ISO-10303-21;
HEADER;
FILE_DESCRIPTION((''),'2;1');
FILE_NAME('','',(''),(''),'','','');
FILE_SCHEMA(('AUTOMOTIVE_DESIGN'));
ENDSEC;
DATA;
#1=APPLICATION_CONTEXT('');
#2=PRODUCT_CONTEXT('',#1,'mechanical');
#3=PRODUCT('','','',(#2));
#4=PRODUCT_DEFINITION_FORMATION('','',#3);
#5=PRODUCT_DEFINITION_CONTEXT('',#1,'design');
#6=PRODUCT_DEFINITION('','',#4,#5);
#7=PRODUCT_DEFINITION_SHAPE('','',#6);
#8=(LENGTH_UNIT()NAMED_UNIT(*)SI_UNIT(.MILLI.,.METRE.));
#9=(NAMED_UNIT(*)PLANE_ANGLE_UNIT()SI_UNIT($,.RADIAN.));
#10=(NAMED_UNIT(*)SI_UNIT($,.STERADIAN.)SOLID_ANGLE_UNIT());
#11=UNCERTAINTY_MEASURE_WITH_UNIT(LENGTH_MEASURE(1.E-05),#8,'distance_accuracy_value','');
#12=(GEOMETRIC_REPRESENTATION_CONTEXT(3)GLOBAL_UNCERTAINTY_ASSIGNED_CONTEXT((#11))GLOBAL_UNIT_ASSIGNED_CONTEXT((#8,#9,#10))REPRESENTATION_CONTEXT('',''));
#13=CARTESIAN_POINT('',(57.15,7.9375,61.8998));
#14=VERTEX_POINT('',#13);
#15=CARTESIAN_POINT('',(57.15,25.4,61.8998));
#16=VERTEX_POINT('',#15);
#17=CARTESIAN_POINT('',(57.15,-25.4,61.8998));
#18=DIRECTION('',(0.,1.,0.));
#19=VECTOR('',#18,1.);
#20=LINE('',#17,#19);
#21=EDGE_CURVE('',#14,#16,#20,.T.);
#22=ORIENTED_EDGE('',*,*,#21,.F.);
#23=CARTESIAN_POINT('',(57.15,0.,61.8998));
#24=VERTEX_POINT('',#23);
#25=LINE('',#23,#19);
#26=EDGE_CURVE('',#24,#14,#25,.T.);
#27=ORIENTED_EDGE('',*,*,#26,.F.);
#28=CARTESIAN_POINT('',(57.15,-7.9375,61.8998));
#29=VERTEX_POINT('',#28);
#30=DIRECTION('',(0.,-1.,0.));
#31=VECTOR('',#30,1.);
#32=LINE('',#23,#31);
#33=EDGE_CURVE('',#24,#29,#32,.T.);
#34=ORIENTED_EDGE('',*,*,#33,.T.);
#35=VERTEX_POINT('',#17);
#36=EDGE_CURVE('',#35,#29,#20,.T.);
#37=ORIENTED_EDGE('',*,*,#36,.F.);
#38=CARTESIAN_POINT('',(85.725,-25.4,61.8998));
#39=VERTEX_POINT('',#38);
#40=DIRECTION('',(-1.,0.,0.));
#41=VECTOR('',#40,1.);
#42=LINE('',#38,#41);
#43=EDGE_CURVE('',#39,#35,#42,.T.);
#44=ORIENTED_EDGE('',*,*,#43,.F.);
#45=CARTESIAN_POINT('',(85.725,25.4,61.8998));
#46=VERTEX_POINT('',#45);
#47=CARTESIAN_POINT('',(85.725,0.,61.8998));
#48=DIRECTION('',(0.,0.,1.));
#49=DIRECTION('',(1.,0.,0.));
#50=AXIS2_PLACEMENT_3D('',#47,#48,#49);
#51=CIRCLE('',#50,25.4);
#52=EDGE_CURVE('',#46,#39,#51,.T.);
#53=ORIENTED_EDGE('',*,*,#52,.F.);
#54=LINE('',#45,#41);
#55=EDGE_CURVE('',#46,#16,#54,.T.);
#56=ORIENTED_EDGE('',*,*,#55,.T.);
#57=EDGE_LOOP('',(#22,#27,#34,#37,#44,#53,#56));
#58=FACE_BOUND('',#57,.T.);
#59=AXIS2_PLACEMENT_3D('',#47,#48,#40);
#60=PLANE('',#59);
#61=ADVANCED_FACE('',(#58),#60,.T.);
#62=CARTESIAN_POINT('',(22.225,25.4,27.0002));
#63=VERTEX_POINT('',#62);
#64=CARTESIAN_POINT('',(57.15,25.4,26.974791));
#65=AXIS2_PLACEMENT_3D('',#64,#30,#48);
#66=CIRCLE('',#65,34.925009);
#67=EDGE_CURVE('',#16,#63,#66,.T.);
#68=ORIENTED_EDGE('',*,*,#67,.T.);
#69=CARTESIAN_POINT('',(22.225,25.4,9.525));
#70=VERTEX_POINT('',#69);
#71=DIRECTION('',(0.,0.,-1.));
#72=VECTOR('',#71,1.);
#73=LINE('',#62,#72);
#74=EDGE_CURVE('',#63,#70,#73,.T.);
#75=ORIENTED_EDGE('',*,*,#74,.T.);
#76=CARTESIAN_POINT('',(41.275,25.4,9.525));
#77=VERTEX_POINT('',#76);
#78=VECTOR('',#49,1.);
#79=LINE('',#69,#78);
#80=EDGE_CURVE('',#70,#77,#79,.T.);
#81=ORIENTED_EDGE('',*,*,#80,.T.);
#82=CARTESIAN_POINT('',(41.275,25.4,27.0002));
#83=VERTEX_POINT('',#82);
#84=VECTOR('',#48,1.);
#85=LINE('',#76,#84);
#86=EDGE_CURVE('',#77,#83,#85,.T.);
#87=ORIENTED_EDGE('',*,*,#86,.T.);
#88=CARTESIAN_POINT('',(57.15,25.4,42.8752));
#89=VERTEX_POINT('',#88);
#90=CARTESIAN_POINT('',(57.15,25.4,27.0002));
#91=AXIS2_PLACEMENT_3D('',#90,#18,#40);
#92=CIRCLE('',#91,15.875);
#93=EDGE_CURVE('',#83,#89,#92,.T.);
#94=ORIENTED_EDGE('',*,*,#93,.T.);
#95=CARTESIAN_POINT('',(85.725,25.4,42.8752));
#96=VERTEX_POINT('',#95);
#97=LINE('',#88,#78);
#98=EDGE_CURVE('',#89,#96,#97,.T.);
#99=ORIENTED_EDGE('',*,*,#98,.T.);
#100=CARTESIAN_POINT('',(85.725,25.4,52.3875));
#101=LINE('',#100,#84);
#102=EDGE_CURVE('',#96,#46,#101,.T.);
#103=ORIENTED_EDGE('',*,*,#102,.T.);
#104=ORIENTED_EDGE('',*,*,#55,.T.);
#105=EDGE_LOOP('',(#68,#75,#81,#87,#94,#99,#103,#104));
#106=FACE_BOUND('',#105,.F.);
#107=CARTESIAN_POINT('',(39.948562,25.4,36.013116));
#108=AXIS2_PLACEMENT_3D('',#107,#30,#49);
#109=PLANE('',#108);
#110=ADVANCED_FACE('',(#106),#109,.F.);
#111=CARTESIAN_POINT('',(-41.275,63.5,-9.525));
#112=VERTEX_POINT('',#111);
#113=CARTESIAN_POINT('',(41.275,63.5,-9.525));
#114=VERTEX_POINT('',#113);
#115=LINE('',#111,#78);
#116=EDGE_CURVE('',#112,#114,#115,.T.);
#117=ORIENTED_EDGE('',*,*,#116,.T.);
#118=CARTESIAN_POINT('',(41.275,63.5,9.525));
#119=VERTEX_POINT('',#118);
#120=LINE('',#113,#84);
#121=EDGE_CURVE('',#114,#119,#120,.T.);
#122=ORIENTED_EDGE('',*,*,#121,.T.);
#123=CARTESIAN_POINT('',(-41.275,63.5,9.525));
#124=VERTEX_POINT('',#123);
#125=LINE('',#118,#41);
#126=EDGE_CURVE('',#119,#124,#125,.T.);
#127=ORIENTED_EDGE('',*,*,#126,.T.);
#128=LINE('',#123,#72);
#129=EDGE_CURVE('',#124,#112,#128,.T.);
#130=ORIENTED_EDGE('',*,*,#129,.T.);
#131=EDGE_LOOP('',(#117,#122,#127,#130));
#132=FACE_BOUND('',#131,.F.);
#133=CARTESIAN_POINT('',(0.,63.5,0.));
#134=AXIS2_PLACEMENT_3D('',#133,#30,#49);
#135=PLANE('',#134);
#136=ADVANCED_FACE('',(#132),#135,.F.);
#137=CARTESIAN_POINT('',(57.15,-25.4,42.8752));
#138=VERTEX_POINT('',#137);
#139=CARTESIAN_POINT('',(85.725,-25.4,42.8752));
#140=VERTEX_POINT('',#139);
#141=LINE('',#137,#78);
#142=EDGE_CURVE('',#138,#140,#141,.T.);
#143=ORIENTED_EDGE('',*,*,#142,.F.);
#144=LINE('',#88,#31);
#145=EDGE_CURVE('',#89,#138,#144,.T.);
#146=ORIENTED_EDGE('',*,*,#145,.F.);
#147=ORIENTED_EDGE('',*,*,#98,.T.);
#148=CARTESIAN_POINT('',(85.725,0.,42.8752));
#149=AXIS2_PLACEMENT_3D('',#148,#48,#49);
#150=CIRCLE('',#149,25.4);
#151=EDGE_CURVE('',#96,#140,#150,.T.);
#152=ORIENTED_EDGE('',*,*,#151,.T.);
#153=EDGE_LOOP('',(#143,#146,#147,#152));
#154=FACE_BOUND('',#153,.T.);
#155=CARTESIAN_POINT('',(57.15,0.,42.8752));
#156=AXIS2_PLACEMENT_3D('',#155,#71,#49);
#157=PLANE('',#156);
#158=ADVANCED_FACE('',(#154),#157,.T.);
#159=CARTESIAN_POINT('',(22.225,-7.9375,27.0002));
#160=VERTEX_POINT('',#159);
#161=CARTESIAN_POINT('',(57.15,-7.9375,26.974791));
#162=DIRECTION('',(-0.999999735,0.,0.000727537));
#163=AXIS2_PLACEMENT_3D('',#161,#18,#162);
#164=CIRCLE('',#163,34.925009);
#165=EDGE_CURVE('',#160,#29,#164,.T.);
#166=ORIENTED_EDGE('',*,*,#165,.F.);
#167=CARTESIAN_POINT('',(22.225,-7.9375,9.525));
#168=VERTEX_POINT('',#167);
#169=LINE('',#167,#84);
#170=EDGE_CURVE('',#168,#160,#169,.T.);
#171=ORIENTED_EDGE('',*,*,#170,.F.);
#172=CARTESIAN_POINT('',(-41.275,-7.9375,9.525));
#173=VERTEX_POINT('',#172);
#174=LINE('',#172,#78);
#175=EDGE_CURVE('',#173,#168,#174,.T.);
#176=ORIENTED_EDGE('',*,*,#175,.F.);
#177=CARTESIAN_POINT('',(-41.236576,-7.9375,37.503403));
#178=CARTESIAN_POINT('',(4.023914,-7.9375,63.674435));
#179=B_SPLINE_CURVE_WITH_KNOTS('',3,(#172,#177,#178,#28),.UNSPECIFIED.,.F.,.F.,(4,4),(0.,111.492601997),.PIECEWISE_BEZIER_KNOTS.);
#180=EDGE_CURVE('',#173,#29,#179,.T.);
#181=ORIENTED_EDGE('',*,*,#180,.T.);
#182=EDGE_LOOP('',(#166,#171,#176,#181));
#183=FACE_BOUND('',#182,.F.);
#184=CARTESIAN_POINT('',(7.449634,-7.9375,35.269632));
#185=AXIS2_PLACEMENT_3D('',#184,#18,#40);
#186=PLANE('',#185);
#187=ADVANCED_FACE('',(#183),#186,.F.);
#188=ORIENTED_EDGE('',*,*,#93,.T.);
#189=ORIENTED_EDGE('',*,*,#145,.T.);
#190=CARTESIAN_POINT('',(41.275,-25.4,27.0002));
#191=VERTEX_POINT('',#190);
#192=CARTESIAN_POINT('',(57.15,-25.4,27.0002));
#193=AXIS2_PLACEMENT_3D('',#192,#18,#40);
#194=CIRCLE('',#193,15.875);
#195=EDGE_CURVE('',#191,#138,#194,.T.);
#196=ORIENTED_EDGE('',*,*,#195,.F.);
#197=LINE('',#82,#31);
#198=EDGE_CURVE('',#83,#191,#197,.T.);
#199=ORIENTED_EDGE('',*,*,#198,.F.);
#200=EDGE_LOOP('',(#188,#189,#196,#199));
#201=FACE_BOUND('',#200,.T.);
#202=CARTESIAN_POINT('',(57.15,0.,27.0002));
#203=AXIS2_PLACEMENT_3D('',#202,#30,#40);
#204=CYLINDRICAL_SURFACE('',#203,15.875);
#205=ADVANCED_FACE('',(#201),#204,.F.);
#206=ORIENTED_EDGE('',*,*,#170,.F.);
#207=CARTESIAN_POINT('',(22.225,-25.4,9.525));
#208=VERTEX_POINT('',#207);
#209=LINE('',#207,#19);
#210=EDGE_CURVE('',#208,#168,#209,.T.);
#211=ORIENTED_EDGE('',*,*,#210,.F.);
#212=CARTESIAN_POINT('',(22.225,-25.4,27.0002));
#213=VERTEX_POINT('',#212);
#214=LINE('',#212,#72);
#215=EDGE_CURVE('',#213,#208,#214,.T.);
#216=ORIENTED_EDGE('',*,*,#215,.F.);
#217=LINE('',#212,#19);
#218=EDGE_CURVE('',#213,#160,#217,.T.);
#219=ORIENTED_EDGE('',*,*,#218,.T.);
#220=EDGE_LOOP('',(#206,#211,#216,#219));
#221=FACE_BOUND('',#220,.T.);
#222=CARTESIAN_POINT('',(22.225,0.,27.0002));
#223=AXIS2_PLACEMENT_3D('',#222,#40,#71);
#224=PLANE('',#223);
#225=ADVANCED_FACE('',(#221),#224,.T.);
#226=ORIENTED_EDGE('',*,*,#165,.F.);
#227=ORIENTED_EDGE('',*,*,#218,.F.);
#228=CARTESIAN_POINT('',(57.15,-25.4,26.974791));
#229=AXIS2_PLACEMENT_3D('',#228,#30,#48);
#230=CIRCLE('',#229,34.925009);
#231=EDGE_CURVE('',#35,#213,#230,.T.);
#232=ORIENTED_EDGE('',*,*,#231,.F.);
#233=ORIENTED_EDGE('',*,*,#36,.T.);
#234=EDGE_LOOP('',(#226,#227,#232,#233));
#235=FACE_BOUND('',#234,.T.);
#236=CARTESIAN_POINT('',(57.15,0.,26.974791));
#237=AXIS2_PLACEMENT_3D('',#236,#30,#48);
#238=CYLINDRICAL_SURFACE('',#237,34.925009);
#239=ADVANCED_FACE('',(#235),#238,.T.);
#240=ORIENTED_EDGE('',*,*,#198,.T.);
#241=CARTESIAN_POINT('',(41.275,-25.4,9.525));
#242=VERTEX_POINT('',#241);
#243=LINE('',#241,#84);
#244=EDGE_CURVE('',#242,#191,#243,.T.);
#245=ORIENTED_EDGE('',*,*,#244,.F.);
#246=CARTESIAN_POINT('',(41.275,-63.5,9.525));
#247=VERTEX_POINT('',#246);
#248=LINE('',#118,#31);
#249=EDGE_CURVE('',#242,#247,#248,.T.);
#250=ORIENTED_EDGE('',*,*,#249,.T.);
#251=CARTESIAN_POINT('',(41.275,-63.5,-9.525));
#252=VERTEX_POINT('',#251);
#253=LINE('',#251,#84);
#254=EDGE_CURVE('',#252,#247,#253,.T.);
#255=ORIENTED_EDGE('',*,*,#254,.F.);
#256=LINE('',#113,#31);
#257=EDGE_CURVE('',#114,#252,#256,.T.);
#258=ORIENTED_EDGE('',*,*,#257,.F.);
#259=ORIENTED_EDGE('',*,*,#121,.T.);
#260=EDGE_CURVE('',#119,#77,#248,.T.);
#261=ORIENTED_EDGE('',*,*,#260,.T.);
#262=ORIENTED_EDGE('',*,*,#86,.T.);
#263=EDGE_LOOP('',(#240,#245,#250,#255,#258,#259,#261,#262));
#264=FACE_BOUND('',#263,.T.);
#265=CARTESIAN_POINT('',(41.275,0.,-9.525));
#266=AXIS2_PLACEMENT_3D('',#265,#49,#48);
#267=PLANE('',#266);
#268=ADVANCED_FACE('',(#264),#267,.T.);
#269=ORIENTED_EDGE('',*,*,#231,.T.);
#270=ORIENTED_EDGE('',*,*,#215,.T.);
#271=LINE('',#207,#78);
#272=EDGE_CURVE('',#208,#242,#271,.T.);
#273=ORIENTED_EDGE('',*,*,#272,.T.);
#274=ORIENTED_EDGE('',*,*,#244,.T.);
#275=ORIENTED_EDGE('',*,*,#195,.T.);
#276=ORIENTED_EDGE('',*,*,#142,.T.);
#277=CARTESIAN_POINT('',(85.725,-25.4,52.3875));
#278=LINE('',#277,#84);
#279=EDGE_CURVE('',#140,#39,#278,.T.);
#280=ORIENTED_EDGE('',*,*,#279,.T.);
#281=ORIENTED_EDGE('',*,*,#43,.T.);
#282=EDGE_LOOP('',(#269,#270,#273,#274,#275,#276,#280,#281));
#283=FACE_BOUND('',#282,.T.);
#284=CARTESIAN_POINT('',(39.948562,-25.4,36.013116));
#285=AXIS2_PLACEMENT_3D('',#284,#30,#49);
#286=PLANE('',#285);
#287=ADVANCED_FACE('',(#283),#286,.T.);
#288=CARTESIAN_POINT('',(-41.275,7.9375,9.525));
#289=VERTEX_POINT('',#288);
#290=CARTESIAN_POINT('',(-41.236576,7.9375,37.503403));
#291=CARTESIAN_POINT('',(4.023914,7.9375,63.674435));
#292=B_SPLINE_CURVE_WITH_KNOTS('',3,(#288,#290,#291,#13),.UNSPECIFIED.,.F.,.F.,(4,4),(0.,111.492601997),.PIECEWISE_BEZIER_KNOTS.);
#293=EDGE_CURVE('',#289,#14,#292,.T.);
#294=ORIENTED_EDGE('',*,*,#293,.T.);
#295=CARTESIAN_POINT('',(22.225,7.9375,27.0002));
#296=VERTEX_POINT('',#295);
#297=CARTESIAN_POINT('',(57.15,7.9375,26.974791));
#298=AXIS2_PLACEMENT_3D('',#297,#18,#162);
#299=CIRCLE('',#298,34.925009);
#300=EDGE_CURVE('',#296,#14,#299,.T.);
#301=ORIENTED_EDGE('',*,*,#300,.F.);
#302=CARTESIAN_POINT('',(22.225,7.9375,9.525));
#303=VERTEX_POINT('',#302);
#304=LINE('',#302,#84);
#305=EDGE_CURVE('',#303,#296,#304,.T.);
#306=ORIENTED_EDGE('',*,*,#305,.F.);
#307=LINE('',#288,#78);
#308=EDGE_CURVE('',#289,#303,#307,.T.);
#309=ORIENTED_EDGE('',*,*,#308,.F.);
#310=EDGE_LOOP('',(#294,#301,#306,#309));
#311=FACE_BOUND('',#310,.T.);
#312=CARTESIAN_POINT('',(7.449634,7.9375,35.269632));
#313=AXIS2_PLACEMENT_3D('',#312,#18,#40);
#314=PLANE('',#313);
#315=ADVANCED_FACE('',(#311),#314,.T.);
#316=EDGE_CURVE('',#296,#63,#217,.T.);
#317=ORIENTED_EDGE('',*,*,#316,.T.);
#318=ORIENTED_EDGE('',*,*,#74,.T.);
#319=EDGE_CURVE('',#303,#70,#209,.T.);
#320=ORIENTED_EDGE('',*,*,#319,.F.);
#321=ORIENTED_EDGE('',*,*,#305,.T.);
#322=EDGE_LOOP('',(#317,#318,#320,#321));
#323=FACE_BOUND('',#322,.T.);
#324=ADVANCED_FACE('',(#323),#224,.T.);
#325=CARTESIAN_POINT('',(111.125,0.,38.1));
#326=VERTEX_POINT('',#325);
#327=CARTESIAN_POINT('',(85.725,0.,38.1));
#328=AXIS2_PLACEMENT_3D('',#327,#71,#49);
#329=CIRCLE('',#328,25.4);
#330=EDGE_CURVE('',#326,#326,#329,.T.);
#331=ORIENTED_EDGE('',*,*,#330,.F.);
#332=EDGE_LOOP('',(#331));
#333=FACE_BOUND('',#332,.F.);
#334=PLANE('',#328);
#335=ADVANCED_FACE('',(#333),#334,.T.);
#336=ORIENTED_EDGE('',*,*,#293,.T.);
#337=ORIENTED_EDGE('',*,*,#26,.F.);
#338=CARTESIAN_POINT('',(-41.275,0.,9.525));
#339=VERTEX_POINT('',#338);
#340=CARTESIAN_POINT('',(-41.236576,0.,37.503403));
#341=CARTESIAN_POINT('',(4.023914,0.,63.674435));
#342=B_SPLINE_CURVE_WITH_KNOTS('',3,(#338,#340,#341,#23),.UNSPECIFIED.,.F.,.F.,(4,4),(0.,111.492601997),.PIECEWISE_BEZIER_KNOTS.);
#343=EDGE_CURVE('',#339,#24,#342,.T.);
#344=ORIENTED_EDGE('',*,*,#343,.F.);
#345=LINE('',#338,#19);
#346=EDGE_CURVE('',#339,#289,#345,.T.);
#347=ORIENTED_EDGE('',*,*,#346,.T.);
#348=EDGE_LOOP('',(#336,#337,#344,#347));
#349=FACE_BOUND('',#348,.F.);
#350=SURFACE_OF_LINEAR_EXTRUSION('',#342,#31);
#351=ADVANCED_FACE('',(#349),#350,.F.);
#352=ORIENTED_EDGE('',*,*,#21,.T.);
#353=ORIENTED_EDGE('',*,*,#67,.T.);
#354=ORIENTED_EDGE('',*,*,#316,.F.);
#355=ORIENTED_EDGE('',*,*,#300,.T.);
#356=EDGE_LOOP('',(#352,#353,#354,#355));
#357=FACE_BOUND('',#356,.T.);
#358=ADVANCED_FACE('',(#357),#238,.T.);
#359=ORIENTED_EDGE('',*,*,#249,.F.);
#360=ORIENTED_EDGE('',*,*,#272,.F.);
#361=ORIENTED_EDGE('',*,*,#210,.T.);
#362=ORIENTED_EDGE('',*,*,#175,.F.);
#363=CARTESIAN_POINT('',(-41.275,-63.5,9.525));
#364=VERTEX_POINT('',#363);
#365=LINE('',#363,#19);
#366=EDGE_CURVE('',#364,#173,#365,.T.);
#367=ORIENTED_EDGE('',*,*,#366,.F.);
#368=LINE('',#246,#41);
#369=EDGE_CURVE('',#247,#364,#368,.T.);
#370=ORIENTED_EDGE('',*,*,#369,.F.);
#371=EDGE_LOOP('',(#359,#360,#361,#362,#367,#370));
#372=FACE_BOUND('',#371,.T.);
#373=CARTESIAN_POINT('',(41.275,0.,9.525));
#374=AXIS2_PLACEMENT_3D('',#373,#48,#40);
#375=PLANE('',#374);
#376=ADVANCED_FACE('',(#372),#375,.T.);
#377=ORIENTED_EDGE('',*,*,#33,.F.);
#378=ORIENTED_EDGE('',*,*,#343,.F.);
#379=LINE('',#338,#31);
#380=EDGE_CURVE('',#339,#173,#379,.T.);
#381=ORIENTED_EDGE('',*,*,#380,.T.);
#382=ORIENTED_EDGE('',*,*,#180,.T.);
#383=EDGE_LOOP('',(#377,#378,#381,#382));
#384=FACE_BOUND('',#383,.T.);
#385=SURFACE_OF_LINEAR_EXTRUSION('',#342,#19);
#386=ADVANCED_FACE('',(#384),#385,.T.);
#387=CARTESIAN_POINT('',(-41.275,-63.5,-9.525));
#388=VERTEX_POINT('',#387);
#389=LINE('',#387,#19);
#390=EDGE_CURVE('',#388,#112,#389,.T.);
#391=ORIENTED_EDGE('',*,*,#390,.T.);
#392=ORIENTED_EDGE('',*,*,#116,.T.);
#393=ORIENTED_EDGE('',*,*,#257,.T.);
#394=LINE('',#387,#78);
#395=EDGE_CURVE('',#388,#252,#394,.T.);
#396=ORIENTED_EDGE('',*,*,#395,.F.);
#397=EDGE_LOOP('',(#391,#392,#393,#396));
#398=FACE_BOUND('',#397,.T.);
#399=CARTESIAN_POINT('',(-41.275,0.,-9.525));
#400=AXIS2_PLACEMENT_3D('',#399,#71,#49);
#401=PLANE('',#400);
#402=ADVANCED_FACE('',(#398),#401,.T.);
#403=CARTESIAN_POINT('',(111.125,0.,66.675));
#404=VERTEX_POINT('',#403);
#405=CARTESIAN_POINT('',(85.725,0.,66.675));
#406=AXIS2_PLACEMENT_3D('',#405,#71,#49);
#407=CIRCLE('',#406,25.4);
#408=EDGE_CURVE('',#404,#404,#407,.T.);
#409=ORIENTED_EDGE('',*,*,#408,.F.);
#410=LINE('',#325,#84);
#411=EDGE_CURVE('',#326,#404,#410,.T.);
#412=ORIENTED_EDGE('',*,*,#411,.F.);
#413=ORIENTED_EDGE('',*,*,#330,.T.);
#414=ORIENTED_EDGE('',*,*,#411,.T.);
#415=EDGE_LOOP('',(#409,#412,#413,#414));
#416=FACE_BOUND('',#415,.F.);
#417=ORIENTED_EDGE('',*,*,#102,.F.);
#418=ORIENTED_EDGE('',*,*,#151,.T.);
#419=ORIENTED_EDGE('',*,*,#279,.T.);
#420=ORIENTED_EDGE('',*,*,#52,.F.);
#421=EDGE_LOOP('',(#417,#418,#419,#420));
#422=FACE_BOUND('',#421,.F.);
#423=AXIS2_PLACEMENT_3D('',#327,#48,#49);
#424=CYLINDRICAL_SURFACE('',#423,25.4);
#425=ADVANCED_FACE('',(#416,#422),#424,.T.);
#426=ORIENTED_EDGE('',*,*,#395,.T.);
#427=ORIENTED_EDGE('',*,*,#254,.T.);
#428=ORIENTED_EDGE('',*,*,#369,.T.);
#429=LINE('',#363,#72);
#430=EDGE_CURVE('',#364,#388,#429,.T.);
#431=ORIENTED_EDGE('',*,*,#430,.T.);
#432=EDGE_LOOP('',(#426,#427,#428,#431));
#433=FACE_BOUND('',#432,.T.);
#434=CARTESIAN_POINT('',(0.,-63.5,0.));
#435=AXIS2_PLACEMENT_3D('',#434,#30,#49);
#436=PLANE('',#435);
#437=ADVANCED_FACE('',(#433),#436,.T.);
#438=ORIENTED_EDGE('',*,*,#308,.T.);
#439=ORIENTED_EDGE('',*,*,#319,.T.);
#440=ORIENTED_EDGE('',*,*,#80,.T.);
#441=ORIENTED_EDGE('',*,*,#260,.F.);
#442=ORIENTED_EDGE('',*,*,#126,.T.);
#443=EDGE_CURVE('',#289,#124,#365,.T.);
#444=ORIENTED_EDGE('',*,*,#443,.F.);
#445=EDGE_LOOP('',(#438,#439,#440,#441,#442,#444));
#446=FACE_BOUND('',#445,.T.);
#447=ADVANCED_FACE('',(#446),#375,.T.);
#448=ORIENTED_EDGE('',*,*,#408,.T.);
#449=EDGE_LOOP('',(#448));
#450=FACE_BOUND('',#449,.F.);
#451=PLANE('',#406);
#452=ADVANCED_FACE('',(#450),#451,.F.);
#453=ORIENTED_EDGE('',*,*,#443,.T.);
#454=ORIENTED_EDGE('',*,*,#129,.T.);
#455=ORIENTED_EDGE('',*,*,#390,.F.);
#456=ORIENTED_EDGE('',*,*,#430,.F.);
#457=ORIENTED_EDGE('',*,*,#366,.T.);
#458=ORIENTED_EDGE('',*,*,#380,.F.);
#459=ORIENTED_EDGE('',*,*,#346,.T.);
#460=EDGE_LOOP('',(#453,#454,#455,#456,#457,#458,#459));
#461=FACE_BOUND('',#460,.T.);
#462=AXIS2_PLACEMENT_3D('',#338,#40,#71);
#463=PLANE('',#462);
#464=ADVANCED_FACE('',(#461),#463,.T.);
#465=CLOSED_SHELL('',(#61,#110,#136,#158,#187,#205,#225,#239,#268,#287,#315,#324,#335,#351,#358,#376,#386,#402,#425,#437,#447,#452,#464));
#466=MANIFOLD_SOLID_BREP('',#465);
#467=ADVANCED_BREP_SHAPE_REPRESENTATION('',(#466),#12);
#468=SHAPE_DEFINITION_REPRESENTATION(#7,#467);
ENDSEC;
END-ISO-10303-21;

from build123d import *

# Parameters (mm, degrees)
F1_DEPTH = 63.5
F0_W     = 25.4
F0_H     = 19.0246
F2_DEPTH = 25.4
F4_DEPTH = 7.9375


# Not quite as in the source:
# - a feature names something its author has since deleted; it is built from what else it names


with BuildPart() as f1:
    # F0 (on Front) → F1 (new body, symmetric)
    with BuildSketch(Plane.XZ):
        Polygon((-41.275, -9.525), (41.275, -9.525), (41.275, 9.525), (22.225, 9.525), (-41.275, 9.525), align=None)
    extrude(amount=F1_DEPTH, both=True)

    # F0 (on Front) → F2 (join, symmetric)
    with BuildSketch(Plane.XZ):
        with BuildLine():
            Line((22.225, 9.525), (41.275, 9.525))
            Line((41.275, 9.525), (41.275, 27.0002))
            ThreePointArc((41.275, 27.0002), (45.9246798487, 38.2255201513), (57.15, 42.8752))
            Line((57.15, 42.8752), (60.325, 42.8752))
            Line((60.325, 42.8752), (60.325, 61.8998))
            Line((60.325, 61.8998), (57.15, 61.8998))
            ThreePointArc((57.15, 61.8998), (32.4632742898, 51.6794835164), (22.225, 27.0002))
            Line((22.225, 27.0002), (22.225, 9.525))
        make_face()
        with Locations((73.025, 52.3875)):
            Rectangle(F0_W, F0_H)
    extrude(amount=F2_DEPTH, both=True)

    # F0 (on Front) → F3 (revolve)
    with BuildSketch(Plane.XZ):
        Polygon((85.725, 66.675), (85.725, 61.8998), (85.725, 42.8752), (85.725, 38.1), (111.125, 38.1), (111.125, 66.675), align=None)
    revolve(axis=Axis((85.725, 0, 52.3875), (0, 0, -1)))

    # F0 (on Front) → F4 (join, symmetric)
    with BuildSketch(Plane.XZ):
        with BuildLine():
            add(Edge.make_bspline(
                [(-41.275, 9.525), (-41.2365756929, 37.5034026802), (4.0239142254, 63.6744350195), (57.15, 61.8998)],
                knots=[0, 0, 0, 0, 111.4926019969, 111.4926019969, 111.4926019969, 111.4926019969], degree=3))
            Line((-41.275, 9.525), (22.225, 9.525))
            Line((22.225, 9.525), (22.225, 27.0002))
            ThreePointArc((22.225, 27.0002), (32.4632742898, 51.6794835164), (57.15, 61.8998))
        make_face()
    extrude(amount=F4_DEPTH, both=True)


solid = f1.part
